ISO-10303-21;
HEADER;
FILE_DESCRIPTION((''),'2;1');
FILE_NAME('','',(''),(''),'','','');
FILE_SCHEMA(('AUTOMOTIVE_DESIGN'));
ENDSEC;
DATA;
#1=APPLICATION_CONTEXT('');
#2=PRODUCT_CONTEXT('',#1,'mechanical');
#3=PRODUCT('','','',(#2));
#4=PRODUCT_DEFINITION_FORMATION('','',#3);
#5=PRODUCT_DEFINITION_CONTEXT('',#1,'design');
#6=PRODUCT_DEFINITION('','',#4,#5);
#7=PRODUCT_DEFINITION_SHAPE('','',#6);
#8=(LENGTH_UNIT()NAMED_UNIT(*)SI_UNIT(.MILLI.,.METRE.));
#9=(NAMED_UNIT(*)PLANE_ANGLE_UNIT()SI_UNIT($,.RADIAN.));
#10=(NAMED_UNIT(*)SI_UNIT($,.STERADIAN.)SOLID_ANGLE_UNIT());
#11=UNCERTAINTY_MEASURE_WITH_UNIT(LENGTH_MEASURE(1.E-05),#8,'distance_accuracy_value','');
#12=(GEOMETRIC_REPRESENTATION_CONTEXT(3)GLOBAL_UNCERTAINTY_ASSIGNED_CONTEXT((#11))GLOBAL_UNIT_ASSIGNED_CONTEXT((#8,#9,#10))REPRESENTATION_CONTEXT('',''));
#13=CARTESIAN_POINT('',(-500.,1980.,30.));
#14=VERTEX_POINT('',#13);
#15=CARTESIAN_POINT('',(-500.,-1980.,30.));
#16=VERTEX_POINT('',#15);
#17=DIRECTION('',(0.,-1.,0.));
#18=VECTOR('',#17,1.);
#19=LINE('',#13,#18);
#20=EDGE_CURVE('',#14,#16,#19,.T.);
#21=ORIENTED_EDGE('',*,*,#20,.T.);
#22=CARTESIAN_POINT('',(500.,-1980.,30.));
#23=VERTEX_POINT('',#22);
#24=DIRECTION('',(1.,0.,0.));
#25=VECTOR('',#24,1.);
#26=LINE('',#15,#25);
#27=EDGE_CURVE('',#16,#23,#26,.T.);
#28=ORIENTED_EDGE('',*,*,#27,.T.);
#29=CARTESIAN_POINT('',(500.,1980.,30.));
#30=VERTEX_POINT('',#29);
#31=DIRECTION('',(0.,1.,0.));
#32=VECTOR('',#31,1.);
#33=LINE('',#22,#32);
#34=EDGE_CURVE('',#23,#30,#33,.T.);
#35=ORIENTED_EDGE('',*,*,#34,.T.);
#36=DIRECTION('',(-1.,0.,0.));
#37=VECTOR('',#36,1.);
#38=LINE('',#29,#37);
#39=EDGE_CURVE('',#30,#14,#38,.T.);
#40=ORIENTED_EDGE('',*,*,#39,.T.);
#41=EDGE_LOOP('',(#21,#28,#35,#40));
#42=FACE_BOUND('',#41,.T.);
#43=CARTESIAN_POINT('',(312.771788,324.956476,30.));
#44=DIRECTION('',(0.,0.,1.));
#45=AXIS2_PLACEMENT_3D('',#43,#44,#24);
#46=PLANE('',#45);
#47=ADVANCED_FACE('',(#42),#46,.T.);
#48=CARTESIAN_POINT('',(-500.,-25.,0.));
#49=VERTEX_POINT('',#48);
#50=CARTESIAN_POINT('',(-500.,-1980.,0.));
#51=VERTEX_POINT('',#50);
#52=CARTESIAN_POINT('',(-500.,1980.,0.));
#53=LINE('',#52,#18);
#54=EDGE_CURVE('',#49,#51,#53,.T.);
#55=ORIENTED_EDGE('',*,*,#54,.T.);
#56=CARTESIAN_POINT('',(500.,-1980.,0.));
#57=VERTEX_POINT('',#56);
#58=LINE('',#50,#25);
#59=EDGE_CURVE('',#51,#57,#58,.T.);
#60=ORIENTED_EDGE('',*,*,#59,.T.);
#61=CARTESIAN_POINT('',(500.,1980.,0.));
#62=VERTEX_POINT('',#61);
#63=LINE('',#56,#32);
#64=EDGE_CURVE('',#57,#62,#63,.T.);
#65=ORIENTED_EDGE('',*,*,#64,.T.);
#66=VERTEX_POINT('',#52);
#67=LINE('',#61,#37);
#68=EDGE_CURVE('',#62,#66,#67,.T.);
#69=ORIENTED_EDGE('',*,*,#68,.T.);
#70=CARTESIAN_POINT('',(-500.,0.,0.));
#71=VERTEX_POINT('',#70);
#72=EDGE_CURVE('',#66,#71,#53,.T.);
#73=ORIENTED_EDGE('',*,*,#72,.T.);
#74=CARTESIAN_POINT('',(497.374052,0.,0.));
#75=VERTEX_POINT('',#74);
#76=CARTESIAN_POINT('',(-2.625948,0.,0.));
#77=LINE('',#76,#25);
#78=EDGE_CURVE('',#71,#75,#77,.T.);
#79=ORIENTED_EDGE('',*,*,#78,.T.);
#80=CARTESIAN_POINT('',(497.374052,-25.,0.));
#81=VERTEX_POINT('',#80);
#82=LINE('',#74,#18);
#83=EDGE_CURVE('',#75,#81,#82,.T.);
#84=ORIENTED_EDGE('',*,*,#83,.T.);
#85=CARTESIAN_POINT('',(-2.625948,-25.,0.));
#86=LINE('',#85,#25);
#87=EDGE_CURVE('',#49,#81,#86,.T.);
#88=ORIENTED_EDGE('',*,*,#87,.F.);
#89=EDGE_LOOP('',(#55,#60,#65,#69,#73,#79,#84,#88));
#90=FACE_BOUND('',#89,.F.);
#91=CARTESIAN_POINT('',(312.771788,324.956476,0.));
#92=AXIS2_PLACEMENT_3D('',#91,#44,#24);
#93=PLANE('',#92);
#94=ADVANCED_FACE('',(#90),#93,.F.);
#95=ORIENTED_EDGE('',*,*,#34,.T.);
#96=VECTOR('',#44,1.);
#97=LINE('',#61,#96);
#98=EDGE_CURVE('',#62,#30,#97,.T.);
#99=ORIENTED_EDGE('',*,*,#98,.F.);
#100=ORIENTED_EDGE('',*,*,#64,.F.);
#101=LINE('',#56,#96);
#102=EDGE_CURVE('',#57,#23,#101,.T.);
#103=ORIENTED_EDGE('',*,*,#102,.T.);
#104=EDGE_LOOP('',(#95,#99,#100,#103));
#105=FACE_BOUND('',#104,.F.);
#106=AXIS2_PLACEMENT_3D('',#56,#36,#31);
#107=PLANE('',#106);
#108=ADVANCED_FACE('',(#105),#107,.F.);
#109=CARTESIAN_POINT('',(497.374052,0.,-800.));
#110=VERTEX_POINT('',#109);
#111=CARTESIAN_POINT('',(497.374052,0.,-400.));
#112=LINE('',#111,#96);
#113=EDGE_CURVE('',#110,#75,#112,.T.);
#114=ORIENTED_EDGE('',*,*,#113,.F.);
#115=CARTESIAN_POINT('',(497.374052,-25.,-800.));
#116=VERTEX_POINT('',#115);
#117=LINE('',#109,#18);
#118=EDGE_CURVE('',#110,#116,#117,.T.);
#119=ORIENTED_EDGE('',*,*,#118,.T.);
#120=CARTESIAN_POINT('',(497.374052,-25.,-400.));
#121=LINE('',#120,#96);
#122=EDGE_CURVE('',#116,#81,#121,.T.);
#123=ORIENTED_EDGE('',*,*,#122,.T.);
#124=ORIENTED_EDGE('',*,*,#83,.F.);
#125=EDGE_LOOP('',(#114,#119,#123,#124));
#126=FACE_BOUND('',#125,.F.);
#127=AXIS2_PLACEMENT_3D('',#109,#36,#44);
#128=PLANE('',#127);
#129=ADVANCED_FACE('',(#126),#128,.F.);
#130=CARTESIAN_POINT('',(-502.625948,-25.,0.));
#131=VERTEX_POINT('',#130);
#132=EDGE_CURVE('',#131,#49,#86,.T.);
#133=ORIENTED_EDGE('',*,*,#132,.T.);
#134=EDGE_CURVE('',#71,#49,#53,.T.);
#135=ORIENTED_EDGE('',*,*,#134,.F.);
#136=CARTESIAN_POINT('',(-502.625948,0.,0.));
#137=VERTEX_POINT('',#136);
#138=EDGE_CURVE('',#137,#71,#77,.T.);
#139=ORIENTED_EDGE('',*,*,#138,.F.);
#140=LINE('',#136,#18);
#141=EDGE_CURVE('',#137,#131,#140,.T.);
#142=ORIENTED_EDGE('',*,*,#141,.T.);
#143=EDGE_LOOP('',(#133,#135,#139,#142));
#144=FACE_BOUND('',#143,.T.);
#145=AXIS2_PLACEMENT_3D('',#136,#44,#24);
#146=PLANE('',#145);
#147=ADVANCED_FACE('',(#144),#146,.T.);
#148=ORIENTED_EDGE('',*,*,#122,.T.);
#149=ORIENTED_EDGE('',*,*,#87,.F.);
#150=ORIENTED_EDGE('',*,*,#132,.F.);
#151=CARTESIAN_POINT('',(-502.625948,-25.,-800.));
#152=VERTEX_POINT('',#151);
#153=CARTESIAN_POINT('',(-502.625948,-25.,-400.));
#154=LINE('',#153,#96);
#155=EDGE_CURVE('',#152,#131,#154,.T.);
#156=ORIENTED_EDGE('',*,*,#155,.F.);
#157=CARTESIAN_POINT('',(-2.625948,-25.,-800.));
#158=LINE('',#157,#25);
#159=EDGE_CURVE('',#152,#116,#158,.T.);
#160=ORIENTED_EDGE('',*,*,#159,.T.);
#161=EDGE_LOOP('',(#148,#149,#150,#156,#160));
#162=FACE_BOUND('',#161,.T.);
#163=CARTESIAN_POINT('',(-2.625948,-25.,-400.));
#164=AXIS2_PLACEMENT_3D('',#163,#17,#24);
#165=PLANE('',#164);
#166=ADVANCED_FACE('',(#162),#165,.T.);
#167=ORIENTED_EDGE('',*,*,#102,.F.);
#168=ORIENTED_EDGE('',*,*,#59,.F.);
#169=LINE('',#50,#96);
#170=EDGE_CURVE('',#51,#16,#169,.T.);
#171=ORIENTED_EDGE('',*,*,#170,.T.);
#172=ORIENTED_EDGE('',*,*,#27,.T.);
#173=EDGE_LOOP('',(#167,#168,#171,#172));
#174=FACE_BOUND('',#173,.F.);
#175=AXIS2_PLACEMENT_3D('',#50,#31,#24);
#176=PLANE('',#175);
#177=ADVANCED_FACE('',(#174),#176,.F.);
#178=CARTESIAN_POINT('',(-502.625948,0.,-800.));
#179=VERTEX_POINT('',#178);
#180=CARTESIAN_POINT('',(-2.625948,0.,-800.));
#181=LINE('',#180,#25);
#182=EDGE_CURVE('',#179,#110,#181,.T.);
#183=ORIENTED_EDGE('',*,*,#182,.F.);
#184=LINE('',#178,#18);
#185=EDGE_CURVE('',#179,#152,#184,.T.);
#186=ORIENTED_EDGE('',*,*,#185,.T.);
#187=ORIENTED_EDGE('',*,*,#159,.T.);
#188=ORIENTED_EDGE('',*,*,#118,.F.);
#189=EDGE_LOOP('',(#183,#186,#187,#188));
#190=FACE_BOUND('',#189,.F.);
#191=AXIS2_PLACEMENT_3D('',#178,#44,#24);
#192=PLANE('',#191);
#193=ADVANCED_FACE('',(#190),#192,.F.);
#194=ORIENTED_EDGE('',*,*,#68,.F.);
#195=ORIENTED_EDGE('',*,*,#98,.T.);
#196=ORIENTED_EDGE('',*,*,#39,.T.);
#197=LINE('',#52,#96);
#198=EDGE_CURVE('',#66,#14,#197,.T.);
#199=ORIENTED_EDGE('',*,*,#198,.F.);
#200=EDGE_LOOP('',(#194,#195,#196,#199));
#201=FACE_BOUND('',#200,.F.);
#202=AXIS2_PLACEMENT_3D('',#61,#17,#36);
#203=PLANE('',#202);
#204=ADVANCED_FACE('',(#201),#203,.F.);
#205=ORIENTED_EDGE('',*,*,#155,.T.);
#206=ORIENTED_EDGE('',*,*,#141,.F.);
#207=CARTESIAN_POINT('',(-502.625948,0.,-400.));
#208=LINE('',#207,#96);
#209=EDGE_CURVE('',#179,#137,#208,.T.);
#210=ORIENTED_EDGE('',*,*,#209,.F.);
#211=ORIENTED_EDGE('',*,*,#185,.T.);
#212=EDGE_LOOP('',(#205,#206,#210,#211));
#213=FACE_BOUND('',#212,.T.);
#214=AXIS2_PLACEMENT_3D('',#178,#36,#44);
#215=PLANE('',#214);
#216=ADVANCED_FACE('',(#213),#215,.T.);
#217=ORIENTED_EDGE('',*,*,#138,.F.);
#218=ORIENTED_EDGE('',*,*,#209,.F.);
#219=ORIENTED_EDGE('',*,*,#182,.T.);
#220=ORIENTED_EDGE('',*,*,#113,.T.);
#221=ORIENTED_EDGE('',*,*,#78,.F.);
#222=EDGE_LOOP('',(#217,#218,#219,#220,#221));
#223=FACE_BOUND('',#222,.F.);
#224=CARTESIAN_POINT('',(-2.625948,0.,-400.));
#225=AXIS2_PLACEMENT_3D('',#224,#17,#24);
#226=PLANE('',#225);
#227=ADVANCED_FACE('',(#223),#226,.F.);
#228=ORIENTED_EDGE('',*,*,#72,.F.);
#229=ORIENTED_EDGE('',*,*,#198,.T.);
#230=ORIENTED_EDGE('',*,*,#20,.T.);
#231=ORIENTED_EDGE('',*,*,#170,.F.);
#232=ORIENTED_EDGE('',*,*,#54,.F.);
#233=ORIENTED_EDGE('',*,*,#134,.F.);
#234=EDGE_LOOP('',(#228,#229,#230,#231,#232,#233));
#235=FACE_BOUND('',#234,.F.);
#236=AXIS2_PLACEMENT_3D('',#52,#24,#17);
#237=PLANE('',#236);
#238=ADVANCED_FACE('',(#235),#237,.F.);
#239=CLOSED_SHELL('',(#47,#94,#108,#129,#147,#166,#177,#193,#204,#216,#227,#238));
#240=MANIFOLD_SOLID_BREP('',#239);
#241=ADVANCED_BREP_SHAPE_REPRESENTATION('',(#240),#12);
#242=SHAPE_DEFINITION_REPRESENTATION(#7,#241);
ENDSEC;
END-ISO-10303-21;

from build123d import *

# Parameters (mm, degrees)
F3_DEPTH = 30
F1_W     = 1000
F1_H     = 800
F4_DEPTH = 25


# Not quite as in the source:
# - the program builds the solid bodies; features that only make, move or delete a surface that nothing else refers to are left out


with BuildPart() as f3:
    # F0 (on Top) → F3 (new body)
    with BuildSketch(Plane.XY):
        Polygon((500, 0), (500, 500), (-24.3693755725, 500), align=None)
        Polygon((-24.3693755725, 500), (500, 500), (500, 1250), (-211.1726416889, 1250), (-500, 953.5263180733), align=None)
        Polygon((500, 0), (-24.3693755725, 500), (-500, 500), (-500, -500), (-71.4285714286, -500), align=None)
        Polygon((-500, 500), (-24.3693755725, 500), (-500, 953.5263180733), align=None)
        Polygon((500, -500), (500, 0), (-71.4285714286, -500), align=None)
        Polygon((-211.1726416889, 1250), (500, 1250), (500, 1980), align=None)
        Polygon((-500, 1250), (-500, 953.5263180733), (-211.1726416889, 1250), align=None)
        Polygon((500, -1250), (500, -500), (-71.4285714286, -500), (-500, -875), (-160.6334841629, -1250), align=None)
        Polygon((-500, -875), (-71.4285714286, -500), (-500, -500), align=None)
        Polygon((-500, 1250), (-211.1726416889, 1250), (500, 1980), (-500, 1980), align=None)
        Polygon((500, -1980), (500, -1250), (-160.6334841629, -1250), align=None)
        Polygon((-160.6334841629, -1250), (-500, -875), (-500, -1250), align=None)
        Polygon((500, -1980), (-160.6334841629, -1250), (-500, -1250), (-500, -1980), align=None)
    extrude(amount=F3_DEPTH)

    # F1 (on Front) → F4 (join)
    with BuildSketch(Plane.XZ):
        with Locations((-2.6259482768, -400)):
            Rectangle(F1_W, F1_H)
    extrude(amount=F4_DEPTH)


solid = f3.part
